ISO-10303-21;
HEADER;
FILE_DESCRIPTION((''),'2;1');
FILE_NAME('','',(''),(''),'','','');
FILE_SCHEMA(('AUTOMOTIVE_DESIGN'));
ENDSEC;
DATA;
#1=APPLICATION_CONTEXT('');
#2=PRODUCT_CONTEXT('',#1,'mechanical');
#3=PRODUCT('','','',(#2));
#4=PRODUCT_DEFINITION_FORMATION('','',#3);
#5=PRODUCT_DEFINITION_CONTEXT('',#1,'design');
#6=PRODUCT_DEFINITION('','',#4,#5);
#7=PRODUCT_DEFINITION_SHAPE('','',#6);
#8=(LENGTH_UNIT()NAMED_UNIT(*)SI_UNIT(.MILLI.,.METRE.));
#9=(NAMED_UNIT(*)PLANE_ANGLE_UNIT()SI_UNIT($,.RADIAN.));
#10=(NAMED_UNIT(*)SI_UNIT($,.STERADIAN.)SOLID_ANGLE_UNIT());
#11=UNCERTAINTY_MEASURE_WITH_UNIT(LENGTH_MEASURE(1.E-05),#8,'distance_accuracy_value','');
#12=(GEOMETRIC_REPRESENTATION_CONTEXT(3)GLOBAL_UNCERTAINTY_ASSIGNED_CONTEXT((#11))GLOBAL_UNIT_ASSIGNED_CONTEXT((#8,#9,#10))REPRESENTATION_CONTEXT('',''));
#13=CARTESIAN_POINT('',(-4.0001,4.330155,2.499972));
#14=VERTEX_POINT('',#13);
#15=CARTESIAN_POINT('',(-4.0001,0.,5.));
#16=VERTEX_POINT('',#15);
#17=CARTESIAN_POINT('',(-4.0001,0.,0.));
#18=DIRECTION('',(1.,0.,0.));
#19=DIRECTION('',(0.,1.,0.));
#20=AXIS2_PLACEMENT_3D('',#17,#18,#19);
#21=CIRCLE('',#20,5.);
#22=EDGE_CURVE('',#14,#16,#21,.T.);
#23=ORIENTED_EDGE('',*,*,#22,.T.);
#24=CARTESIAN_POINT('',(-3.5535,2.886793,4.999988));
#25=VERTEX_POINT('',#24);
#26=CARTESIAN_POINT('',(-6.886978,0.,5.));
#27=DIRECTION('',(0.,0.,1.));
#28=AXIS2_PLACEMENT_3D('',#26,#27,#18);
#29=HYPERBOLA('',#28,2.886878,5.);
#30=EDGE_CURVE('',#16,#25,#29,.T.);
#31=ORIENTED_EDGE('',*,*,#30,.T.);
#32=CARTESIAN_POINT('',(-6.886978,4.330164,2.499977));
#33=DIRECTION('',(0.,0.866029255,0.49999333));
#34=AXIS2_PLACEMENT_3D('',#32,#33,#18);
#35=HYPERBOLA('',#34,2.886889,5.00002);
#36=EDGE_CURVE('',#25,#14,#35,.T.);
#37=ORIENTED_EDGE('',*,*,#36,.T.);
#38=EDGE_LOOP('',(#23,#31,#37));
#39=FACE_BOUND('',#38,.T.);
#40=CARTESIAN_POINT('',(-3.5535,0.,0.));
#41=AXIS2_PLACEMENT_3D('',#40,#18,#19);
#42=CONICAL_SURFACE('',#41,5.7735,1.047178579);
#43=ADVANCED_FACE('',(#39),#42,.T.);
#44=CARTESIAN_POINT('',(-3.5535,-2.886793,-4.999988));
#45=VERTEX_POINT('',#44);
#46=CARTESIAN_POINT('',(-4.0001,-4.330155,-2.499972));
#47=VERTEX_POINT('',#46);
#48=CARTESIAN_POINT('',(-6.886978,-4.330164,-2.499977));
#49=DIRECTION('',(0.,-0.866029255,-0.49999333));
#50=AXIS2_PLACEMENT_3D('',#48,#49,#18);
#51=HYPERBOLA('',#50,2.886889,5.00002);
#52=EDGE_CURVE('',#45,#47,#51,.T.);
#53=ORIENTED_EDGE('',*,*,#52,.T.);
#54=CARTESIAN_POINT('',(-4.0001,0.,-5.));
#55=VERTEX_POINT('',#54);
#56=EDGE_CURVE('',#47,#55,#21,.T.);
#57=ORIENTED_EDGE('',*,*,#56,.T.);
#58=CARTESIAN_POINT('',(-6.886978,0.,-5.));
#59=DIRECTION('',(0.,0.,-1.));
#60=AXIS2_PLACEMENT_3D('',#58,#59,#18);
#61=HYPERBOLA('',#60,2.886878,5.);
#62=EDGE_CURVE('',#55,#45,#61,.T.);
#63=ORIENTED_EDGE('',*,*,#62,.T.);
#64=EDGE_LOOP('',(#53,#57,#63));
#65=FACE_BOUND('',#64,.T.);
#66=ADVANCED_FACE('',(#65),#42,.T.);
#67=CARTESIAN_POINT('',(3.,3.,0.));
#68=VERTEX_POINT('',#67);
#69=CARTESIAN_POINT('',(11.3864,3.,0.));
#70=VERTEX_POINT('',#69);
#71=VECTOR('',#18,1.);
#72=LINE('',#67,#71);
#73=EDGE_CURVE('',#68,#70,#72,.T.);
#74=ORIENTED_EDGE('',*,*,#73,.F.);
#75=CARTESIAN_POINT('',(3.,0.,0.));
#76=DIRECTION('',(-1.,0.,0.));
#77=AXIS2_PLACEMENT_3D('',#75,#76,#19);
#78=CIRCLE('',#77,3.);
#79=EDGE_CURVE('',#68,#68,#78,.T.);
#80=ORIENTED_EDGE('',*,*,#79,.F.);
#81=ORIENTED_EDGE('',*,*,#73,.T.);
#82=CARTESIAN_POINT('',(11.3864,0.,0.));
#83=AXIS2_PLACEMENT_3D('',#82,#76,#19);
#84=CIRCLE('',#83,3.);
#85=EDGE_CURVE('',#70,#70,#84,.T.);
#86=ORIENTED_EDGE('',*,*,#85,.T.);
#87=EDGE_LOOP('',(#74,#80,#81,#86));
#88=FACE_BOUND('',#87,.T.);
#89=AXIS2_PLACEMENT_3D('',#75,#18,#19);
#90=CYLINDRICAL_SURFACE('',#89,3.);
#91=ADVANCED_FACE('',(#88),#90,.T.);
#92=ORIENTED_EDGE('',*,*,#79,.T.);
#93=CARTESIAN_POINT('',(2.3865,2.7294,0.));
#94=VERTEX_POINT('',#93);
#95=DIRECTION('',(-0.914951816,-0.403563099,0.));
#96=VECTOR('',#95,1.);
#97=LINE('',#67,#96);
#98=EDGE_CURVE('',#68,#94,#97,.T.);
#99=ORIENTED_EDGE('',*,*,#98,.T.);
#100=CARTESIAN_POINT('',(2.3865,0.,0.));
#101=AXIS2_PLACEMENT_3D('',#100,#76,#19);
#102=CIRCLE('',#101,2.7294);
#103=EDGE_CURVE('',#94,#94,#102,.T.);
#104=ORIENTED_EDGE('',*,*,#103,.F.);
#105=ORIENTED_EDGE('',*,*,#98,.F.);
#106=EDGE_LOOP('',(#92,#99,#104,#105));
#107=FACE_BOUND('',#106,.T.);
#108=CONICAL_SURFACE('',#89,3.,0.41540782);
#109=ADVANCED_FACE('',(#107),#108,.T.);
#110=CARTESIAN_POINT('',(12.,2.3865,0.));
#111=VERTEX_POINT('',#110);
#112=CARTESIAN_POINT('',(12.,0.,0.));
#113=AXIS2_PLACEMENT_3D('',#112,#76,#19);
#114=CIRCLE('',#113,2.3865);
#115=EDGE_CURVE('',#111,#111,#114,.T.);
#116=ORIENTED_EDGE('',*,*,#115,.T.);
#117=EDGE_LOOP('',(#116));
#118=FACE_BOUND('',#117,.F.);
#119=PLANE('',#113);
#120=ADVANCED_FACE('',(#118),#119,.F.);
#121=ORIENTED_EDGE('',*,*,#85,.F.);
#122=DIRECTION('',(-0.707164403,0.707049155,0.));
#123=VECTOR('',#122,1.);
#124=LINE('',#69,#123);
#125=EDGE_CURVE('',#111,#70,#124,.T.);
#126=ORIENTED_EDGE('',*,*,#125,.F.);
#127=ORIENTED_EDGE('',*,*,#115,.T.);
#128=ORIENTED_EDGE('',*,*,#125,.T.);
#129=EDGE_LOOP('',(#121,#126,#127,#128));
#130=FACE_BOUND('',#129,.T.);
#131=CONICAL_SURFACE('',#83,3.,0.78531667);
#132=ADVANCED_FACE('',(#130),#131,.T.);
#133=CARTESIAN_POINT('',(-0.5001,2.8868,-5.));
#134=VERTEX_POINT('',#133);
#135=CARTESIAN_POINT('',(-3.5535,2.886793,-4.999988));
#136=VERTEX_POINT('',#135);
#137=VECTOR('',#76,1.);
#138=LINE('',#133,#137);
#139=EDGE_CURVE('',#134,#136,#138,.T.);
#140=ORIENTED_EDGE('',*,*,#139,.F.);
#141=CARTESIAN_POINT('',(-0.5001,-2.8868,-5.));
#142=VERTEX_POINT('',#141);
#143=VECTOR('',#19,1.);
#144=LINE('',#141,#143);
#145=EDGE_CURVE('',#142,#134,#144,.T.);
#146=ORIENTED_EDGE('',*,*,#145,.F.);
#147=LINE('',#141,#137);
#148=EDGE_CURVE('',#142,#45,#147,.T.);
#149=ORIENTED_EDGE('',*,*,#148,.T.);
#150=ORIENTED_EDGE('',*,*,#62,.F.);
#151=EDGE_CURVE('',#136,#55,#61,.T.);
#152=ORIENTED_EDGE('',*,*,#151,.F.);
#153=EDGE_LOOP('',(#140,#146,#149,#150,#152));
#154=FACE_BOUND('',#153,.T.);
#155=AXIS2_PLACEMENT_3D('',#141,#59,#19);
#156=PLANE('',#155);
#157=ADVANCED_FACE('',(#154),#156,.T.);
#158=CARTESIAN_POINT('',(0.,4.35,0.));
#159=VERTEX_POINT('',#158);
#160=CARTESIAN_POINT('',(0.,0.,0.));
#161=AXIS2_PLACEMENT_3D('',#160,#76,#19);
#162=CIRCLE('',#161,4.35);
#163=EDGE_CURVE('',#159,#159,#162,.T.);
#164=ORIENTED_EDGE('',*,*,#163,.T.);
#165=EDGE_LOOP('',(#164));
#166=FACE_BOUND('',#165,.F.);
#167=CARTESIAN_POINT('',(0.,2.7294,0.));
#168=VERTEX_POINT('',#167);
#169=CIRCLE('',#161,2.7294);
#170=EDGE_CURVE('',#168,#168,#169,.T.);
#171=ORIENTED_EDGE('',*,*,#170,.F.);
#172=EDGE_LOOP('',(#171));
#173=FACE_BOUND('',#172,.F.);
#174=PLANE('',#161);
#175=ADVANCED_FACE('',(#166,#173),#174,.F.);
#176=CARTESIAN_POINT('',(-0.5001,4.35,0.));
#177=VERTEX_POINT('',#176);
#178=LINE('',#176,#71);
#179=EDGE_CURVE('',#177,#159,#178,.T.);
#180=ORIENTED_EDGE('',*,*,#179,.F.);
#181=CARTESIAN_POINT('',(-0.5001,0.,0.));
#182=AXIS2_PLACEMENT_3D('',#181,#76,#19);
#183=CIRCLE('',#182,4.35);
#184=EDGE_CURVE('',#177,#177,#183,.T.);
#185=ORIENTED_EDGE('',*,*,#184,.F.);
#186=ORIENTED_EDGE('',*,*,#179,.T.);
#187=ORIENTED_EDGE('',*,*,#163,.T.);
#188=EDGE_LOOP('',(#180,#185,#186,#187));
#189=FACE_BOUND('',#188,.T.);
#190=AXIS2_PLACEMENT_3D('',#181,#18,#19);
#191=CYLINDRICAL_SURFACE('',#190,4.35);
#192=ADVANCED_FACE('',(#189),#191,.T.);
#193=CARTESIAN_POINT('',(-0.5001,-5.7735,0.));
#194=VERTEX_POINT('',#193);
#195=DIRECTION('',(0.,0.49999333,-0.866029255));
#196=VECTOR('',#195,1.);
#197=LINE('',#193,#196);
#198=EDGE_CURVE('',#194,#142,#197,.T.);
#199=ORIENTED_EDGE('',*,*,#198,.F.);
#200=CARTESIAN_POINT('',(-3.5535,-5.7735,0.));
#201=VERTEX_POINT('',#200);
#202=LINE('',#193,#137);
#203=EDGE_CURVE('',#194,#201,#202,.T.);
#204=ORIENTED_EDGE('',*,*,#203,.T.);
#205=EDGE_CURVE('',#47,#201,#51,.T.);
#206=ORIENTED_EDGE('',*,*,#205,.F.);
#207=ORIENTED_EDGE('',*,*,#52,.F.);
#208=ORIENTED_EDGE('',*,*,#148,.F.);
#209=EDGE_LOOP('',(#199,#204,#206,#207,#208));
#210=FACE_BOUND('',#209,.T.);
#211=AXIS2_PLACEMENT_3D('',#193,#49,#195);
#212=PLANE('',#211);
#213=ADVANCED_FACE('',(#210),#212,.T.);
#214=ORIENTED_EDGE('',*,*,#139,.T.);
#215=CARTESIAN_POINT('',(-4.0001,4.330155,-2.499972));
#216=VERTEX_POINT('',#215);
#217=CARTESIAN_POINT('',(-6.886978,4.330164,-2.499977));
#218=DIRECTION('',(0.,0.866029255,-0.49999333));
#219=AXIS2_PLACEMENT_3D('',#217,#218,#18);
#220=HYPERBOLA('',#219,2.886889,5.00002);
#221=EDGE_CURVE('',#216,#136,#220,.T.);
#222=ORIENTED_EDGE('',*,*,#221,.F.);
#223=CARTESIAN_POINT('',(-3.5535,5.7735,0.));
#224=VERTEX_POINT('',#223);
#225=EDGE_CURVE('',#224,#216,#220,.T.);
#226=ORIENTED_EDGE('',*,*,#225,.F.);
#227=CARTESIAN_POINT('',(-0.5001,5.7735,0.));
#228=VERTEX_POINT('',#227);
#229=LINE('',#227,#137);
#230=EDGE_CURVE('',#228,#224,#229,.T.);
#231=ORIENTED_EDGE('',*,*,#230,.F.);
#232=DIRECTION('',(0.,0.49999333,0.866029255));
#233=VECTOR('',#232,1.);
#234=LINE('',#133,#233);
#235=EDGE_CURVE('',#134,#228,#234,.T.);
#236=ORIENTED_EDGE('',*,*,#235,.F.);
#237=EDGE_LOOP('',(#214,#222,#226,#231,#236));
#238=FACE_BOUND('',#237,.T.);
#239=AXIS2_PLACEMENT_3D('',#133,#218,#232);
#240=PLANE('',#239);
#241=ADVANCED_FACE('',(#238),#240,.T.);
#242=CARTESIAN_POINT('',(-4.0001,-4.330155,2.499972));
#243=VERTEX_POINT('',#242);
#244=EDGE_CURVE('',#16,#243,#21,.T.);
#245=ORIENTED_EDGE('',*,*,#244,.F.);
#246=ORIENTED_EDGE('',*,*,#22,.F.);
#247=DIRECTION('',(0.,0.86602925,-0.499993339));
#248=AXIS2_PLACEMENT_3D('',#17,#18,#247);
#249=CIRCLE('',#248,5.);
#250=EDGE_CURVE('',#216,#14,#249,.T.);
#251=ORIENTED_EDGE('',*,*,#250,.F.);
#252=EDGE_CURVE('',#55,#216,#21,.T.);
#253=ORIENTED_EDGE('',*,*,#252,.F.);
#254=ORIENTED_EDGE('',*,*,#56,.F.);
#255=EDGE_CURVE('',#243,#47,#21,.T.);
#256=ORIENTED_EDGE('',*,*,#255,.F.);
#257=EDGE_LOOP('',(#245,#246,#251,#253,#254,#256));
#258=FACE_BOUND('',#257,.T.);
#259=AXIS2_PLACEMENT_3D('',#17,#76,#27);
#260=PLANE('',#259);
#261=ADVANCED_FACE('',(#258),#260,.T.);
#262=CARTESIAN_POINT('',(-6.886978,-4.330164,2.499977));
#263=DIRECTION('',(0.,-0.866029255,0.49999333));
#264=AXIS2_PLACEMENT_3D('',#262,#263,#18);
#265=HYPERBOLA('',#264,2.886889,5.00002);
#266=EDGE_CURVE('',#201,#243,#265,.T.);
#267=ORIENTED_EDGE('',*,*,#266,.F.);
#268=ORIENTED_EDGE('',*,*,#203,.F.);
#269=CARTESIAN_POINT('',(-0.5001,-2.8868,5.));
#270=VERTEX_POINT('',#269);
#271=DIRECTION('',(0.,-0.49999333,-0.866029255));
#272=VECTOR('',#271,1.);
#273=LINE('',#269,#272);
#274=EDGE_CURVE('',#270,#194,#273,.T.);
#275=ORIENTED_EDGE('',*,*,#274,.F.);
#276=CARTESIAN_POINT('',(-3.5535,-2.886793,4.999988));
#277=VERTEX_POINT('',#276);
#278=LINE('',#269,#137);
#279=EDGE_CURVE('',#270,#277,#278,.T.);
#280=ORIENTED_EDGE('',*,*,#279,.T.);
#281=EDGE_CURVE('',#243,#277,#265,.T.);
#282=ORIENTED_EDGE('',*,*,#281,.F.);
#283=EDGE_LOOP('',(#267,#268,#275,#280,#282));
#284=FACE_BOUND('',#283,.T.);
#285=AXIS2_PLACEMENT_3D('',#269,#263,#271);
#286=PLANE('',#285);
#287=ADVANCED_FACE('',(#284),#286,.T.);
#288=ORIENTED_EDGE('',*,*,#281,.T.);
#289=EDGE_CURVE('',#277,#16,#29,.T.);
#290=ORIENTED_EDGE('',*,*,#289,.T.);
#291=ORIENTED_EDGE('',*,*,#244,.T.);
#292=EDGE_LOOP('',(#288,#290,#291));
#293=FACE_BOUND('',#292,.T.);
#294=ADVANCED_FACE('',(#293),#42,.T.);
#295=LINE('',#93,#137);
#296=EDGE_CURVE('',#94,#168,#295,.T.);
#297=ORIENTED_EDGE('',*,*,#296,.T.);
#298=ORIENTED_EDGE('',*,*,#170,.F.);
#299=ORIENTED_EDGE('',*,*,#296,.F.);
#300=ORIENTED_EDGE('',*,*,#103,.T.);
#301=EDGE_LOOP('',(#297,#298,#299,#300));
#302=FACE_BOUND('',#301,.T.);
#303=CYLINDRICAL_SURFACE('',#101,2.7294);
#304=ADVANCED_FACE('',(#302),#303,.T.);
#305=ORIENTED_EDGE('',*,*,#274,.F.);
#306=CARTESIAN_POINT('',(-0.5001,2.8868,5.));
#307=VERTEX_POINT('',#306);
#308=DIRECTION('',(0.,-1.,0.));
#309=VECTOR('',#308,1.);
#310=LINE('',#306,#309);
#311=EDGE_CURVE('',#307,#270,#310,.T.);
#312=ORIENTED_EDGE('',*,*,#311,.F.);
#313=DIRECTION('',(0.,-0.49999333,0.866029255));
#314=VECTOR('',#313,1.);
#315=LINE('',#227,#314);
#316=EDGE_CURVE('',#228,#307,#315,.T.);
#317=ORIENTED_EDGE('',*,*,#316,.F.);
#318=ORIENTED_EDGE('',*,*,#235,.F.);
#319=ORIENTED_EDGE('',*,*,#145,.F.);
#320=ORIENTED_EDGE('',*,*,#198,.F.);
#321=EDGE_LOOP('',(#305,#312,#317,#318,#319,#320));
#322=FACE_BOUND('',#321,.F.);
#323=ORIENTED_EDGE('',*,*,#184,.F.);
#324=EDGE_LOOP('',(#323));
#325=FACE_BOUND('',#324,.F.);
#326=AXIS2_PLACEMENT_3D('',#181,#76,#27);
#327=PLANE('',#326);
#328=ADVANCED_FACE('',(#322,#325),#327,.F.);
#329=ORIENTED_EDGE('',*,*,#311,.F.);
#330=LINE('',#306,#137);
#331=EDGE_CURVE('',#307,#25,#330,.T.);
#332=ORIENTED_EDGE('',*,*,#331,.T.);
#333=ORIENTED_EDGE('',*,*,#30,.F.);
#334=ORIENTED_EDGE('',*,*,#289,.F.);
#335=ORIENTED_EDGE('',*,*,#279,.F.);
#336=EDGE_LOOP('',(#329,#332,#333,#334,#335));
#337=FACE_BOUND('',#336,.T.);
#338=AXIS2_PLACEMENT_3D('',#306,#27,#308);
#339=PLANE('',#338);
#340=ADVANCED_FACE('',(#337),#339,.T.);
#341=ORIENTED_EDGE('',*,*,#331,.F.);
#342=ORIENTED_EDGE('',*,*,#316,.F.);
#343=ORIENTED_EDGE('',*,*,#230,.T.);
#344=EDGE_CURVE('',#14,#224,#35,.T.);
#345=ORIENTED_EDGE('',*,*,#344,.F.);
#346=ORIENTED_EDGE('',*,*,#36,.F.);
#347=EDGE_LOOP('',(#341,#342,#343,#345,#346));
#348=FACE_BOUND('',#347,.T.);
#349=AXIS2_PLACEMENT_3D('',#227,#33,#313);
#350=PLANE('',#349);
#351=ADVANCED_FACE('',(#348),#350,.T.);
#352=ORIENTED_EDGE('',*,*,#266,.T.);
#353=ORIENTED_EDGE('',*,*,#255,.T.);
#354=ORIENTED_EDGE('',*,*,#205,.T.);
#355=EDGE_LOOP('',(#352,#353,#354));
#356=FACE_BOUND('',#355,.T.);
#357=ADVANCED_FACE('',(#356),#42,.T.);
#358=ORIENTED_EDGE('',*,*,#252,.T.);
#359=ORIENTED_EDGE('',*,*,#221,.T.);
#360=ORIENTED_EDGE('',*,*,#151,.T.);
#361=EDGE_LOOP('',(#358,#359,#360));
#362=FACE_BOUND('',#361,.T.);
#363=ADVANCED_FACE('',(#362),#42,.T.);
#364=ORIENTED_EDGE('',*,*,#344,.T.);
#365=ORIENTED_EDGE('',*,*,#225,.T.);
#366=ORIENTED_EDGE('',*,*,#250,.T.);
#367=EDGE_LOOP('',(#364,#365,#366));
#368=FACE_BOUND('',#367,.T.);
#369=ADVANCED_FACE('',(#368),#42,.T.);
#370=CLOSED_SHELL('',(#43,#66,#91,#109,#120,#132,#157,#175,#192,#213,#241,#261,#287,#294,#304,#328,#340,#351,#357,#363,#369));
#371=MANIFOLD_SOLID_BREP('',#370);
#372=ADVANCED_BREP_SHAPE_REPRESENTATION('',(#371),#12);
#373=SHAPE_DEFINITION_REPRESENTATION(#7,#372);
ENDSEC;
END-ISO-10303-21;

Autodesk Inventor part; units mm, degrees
ref_plane "YZ Plane" through (0, 0, 0) normal (1, 0, 0) x (0, 1, 0)
ref_plane "XZ Plane" through (0, 0, 0) normal (0, 1, 0) x (-1, 0, 0)
sketch "Sketch1" plane through (0, 0, 0) normal (0, 0, 1) x (1, 0, 0)
  line L0 (0, 4.35) -> (0, 2.7294)
  line L1 (3, 3) -> (12, 3)
  line L2 (12, 3) -> (12, 0)
  line L3 (12, 0) -> (-0.5001, 0)
  line L4 (-3.0001, 0) -> (14.5, 0) projected
  line L5 (-0.5001, 0) -> (-0.5001, 4.35)
  line L6 (-0.5001, 4.35) -> (0, 4.35)
  line L7 (3, 3) -> (2.3865, 2.7294)
  line L8 (2.3865, 2.7294) -> (0, 2.7294)
  line L9 (0, -0.87) -> (0, 5.22) projected
  dimension "d0" = 12
  dimension "d1" = 9
  dimension "d2" = 6
  dimension "d9" = 0.5001
  dimension "d10" = 8.7
  dimension "d13" = 0.6136
  dimension "d14" = 5.4587
revolve "Body" add sketch "Sketch1" angle 360 about axis through (12, 0, 0) along (-1, 0, 0)
sketch "Sketch2" plane through (-0.5001, 0, 0) normal (-1, 0, 0) x (0, 0, 1)
  line L0 (0, 5.7735) -> (5, 2.8868)
  line L1 (5, 2.8868) -> (5, -2.8868)
  line L2 (5, -2.8868) -> (0, -5.7735)
  line L3 (0, -5.7735) -> (-5, -2.8868)
  line L4 (-5, -2.8868) -> (-5, 2.8868)
  line L5 (-5, 2.8868) -> (0, 5.7735)
  point P0 (0, 0)
  point P1 (0, 0)
  dimension "d11" = 10
extrude "Head" add sketch "Sketch2" along normal blind 3.5
sketch "Sketch4" plane through (0, 0, 0) normal (0, 0, 1) x (1, 0, 0)
  line L0 (-4.0001, 5) -> (-4.0001, 5.7735)
  line L1 (-4.0001, 5.7735) -> (-3.5535, 5.7735)
  line L2 (-3.5535, 5.7735) -> (-4.0001, 5)
  line L3 (-4.7001, 0) -> (0.1999, 0) projected
  line L4 (-0.5001, 5.7735) -> (-4.0001, 5.7735) projected
  line L5 (-4.0001, 2.8868) -> (-4.0001, 5.7735) projected
  dimension "d5" = 30
  dimension "d19" = 10
revolve "Chamfer1" cut sketch "Sketch4" angle 360 about axis through (-10, 0, 0) along (1, 0, 0)
thread "Thread" size "M6x1" class "6g" standard "ISO Metric profile" length 9
chamfer "Chamfer2" distance 0.6135 distance2 0.6136 1 edges at (12, -3, 0) measured on face at (12, -0.5681, 0.823)
ref_plane "Work Plane1" through (1.525, 0, 0) normal (0, 0, 1) x (1, 0, 0)
equation "\"d0\" = NLG"
equation "\"d1\" = GEL"
equation "\"d2\" = GD"
equation "\"d10\" = SD2"
equation "\"d14\" = BDM"
equation "\"d11\" = SW"
equation "\"d3\" = KOH - SD"
equation "\"d5\" = ANG1"
equation "\"d19\" = SW0"
equation "\"d15\" = GEL"
equation "\"d6\" = -0.5 * SPD + 0.5 * GD"
equation "\"NLG\" = 12"
equation "\"GD\" = NND"
equation "\"BDM\" = 5.45873"
equation "\"KOH\" = 4"
equation "\"GEL\" = 9"
equation "\"SW\" = 10"
equation "\"SW0\" = 10"
equation "\"SPD\" = NND - 1.2269 * PTC"
equation "\"SD2\" = 8.7"
equation "\"SD\" = 0.5"
equation "\"ANG1\" = 30deg"
equation "\"GAL\" = 0.61345 * PTC"
equation "\"GUL\" = 0.61345 * PTC"
equation "\"RR\" = 0.25"
equation "\"GD1\" = THREADDIA - 1.2269 * PTC"
equation "\"THREADDIA\" = 6"
equation "\"TOA\" = 30deg"
equation "\"PTC\" = 1"
equation "\"NND\" = 6"
equation "\"E0\" = 1.155 * SW"
properties part number "DIN 933 - M6  x 12" material "Steel, Mild"
